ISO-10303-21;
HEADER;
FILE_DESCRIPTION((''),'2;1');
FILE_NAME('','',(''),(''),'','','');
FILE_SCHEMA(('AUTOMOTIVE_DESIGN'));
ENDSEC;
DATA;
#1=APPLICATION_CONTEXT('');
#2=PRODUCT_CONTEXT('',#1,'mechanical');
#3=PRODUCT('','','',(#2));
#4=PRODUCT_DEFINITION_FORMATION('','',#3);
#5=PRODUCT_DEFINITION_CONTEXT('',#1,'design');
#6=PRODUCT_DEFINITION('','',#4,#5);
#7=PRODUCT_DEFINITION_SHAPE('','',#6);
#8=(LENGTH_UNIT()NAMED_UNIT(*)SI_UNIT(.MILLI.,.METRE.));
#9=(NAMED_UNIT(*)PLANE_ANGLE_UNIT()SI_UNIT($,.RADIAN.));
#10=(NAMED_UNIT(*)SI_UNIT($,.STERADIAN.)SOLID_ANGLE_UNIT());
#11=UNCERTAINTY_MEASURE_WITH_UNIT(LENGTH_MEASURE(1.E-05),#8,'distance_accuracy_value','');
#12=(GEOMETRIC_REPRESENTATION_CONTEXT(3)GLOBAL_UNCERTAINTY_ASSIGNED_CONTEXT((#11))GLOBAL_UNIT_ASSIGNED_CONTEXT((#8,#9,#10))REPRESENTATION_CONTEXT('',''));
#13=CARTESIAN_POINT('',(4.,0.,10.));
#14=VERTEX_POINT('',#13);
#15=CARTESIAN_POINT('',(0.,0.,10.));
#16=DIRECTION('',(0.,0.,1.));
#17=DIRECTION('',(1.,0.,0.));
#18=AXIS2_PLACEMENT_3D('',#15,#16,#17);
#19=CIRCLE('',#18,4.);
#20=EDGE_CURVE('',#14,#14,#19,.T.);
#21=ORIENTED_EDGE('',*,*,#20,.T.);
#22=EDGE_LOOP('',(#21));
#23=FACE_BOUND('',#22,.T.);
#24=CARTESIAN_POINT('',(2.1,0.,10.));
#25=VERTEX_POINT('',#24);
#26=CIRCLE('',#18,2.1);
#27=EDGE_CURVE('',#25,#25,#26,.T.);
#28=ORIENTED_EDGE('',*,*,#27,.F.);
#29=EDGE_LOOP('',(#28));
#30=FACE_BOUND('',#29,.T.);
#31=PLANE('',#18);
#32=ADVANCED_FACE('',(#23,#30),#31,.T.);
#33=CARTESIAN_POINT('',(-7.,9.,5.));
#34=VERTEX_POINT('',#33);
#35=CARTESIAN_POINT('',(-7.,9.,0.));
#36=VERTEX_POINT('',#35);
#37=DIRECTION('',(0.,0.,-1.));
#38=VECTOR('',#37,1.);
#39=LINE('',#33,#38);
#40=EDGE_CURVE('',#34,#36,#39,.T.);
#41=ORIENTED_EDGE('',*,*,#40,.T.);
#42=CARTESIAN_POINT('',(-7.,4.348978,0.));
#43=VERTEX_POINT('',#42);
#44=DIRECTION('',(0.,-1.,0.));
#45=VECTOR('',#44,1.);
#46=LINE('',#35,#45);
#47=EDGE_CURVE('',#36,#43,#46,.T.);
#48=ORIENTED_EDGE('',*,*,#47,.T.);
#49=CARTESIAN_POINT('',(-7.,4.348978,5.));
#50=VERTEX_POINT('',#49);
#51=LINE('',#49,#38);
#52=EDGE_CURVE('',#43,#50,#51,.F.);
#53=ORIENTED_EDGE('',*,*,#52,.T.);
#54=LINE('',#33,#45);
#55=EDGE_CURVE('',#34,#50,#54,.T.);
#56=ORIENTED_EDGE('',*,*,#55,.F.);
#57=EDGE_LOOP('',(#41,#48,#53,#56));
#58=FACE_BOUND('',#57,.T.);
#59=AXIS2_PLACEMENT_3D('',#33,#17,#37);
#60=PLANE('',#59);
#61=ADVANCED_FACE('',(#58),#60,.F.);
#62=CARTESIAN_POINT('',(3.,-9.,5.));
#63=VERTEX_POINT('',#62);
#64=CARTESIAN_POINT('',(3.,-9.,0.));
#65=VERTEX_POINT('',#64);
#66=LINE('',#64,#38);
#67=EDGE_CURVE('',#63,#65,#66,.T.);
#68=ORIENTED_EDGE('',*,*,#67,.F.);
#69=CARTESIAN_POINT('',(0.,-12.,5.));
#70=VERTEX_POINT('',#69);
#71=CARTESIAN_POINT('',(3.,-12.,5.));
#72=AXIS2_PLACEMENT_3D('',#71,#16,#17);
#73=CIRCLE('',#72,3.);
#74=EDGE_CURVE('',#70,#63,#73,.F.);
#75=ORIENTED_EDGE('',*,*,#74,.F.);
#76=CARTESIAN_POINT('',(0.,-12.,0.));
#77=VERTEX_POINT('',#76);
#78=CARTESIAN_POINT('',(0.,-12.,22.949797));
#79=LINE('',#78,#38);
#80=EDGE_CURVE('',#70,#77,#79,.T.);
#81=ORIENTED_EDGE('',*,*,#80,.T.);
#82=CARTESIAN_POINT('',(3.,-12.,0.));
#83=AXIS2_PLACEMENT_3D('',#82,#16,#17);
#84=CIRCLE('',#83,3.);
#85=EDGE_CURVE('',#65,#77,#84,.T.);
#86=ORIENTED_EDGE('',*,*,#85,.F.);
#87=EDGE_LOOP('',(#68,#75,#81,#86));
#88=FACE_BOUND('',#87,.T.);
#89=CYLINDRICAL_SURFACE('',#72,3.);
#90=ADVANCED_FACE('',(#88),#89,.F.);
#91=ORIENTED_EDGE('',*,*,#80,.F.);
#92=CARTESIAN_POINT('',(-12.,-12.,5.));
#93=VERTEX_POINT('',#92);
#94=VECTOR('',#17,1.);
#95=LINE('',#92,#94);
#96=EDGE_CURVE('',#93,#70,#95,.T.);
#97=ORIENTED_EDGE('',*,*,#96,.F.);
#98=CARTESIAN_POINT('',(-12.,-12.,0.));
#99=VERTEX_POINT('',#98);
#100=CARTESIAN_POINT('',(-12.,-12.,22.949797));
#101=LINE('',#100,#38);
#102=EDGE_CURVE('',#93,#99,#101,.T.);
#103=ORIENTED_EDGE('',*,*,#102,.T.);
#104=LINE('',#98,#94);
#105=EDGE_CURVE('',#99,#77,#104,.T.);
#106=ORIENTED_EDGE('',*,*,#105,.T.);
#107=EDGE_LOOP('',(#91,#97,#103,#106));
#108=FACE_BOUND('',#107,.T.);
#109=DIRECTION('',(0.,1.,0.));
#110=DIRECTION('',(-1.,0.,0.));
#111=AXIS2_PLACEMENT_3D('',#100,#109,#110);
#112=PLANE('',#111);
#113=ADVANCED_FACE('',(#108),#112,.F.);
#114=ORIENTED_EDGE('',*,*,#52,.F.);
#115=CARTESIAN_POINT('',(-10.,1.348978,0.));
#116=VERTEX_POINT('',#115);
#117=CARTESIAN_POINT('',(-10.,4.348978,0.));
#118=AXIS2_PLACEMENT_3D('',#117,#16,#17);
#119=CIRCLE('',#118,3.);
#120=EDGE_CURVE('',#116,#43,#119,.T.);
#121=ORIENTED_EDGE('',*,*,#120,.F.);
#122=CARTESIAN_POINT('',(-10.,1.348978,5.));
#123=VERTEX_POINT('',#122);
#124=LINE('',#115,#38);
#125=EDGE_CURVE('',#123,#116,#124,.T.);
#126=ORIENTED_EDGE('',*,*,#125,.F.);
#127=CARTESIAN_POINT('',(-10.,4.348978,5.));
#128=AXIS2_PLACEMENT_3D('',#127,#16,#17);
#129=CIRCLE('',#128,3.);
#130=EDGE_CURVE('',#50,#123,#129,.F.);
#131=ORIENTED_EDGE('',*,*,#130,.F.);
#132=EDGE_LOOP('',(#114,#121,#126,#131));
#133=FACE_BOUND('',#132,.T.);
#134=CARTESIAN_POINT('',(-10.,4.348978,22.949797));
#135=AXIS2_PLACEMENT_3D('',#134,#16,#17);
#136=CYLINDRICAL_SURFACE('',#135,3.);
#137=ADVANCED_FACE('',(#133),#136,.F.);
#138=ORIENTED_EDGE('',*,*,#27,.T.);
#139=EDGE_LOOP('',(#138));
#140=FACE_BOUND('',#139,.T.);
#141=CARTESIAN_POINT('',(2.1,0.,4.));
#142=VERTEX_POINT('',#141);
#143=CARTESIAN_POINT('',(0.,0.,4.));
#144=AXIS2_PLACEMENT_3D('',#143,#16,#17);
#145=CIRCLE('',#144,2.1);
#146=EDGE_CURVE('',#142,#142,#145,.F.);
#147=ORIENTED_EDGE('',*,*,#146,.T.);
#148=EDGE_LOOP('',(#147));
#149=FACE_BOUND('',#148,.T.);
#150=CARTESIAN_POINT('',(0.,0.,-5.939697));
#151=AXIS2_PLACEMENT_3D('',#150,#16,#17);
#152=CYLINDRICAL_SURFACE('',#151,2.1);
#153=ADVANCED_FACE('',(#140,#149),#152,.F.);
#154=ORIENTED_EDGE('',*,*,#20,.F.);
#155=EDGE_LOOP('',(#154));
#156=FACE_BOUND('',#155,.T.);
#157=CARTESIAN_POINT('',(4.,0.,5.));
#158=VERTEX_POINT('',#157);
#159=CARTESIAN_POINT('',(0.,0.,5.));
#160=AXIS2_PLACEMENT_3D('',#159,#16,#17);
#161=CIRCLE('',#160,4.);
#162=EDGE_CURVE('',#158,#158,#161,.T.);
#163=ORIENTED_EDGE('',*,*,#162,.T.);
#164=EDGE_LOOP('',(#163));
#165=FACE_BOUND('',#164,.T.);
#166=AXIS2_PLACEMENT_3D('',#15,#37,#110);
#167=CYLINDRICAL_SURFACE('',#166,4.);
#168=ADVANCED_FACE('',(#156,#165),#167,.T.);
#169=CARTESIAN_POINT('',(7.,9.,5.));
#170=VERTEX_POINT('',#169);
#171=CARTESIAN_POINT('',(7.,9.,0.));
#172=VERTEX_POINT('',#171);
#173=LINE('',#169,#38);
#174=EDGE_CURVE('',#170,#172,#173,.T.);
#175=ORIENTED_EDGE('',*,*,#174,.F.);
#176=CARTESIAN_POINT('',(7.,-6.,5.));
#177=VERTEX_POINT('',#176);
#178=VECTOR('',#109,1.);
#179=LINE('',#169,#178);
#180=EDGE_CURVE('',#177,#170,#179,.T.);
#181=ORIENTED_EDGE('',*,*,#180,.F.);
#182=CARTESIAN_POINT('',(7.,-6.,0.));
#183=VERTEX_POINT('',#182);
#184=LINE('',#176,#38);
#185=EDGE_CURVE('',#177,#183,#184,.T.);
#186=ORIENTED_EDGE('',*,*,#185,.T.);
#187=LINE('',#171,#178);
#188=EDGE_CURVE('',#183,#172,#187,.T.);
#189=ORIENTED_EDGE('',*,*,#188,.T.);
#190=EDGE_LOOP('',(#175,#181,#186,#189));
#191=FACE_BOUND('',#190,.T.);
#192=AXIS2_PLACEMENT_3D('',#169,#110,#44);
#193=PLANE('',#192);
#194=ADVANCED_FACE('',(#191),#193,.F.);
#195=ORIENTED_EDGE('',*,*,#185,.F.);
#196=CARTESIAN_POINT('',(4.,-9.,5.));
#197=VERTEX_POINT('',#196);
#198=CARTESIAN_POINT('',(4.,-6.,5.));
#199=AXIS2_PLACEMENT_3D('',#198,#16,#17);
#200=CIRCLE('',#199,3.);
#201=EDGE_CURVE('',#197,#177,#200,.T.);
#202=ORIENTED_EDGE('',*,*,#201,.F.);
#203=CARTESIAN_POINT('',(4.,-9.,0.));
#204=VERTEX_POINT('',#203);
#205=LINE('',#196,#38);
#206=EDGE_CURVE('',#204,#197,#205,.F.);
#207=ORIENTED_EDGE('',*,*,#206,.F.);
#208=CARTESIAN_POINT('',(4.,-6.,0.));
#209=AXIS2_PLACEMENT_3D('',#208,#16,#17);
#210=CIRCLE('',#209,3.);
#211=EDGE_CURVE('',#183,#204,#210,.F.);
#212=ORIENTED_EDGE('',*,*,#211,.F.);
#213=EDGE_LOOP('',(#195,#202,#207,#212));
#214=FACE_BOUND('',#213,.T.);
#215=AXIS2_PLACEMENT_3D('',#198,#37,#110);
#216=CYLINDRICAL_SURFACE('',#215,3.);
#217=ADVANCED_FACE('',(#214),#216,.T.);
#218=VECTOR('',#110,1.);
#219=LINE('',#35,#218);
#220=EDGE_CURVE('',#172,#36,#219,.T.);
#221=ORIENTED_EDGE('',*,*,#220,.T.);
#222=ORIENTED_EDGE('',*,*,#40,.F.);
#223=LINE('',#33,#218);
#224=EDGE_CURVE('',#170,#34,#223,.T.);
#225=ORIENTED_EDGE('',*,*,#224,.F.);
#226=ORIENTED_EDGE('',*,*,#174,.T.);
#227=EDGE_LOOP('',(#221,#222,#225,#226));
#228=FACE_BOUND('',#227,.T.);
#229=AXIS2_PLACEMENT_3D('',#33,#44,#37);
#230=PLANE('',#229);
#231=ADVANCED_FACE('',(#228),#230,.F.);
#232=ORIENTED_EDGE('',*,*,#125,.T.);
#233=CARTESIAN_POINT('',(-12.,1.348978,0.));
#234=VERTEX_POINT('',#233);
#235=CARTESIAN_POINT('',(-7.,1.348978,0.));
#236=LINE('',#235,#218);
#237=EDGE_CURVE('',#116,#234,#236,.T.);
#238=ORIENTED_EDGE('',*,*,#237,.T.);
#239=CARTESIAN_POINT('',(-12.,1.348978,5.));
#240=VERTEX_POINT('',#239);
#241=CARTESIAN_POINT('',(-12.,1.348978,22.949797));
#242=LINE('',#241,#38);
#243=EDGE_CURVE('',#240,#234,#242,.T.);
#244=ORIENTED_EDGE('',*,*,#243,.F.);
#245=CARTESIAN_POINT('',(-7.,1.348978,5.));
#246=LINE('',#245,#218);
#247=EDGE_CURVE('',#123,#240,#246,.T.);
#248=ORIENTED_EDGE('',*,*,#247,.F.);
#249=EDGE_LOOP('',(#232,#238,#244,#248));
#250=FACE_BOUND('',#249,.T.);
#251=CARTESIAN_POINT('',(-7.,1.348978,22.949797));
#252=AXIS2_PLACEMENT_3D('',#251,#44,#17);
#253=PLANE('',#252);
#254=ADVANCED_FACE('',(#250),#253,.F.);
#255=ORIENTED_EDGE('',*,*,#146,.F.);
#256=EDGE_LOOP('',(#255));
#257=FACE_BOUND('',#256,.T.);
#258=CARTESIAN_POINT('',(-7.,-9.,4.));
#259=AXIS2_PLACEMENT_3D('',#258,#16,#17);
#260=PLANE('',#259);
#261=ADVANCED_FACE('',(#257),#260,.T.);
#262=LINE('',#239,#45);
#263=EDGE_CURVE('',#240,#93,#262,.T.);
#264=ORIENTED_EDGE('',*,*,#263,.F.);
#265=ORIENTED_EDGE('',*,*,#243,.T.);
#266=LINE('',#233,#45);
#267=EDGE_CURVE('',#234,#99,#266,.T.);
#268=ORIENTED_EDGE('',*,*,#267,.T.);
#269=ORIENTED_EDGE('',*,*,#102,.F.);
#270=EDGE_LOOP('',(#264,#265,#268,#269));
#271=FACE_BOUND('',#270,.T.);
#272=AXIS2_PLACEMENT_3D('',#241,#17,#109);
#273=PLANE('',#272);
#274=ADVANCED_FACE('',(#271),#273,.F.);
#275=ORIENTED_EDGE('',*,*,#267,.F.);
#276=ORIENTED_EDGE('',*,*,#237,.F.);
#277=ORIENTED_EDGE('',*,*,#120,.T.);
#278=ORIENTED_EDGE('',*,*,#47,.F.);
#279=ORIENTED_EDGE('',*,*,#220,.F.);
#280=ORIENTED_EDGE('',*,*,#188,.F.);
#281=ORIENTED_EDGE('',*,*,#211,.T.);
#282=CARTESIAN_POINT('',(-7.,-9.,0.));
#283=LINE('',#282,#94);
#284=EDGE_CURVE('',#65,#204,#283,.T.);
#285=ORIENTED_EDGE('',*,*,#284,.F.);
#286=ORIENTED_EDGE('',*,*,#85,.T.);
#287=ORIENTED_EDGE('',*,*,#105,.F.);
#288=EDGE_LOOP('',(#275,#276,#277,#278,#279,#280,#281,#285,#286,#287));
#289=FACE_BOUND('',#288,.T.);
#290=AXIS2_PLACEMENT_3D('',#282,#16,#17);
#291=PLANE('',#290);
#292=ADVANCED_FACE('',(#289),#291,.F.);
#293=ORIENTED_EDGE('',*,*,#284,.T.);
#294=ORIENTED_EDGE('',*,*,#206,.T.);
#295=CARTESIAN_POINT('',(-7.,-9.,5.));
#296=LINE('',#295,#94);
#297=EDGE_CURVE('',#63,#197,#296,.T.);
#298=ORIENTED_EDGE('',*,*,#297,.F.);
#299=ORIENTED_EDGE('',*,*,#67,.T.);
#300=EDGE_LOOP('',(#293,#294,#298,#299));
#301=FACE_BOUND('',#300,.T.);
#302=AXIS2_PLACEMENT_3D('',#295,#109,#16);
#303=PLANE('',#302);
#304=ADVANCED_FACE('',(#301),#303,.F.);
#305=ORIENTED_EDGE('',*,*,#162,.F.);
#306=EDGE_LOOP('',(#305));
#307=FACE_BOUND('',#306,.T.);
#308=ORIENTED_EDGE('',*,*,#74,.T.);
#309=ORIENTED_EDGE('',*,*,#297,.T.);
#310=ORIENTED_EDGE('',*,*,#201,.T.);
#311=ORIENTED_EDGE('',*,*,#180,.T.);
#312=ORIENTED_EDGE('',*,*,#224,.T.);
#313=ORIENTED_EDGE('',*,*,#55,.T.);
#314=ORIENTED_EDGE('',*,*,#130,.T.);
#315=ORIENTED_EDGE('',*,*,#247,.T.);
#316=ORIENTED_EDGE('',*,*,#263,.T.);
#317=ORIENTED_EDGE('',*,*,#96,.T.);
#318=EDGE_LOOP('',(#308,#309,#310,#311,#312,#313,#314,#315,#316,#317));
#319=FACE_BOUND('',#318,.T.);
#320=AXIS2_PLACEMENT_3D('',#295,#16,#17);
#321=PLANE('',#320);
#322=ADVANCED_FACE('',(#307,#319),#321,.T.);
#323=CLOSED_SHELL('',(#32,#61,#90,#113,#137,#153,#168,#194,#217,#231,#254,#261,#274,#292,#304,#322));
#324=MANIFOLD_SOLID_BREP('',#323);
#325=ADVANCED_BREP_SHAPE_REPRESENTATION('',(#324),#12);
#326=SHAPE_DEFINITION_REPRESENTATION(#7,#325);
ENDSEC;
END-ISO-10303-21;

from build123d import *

# Parameters (mm, degrees)
SKETCH1_W      = 14
SKETCH1_H      = 18
EXTRUDE1_DEPTH = 5
SKETCH2_R      = 4
EXTRUDE2_DEPTH = 5
SKETCH3_R      = 2.1
EXTRUDE3_DEPTH = 6
EXTRUDE5_DEPTH = 5
FILLET1_R      = 3


with BuildPart() as part:
    # Sketch1 → Extrude1 (new body)
    with BuildSketch(Plane.XY):
        Rectangle(SKETCH1_W, SKETCH1_H)
    extrude(amount=EXTRUDE1_DEPTH)

    # Sketch2 → Extrude2 (add)
    with BuildSketch(Plane.XY.offset(5)):
        Circle(SKETCH2_R)
    extrude(amount=EXTRUDE2_DEPTH)

    # Sketch3 → Extrude3 (cut)
    with BuildSketch(Plane.XY.offset(10)):
        Circle(SKETCH3_R)
    extrude(amount=-EXTRUDE3_DEPTH, mode=Mode.SUBTRACT)

    # Sketch4 → Extrude5 (add)
    with BuildSketch(Plane.XY):
        Polygon((-7, 1.348977854), (-12, 1.348977854), (-12, -12), (0, -12), (0, -9), (-7, -9), align=None)
    extrude(amount=EXTRUDE5_DEPTH)

    # Fillet1
    fillet1_edges = [part.edges().sort_by_distance(p)[0] for p in [
        (0, -9, 2.5),
        (7, -9, 2.5),
        (-7, 1.348977854, 2.5),
    ]]
    fillet(fillet1_edges, radius=FILLET1_R - 0.0001)  # a hair under: the kernel refuses the full size


solid = part.part
